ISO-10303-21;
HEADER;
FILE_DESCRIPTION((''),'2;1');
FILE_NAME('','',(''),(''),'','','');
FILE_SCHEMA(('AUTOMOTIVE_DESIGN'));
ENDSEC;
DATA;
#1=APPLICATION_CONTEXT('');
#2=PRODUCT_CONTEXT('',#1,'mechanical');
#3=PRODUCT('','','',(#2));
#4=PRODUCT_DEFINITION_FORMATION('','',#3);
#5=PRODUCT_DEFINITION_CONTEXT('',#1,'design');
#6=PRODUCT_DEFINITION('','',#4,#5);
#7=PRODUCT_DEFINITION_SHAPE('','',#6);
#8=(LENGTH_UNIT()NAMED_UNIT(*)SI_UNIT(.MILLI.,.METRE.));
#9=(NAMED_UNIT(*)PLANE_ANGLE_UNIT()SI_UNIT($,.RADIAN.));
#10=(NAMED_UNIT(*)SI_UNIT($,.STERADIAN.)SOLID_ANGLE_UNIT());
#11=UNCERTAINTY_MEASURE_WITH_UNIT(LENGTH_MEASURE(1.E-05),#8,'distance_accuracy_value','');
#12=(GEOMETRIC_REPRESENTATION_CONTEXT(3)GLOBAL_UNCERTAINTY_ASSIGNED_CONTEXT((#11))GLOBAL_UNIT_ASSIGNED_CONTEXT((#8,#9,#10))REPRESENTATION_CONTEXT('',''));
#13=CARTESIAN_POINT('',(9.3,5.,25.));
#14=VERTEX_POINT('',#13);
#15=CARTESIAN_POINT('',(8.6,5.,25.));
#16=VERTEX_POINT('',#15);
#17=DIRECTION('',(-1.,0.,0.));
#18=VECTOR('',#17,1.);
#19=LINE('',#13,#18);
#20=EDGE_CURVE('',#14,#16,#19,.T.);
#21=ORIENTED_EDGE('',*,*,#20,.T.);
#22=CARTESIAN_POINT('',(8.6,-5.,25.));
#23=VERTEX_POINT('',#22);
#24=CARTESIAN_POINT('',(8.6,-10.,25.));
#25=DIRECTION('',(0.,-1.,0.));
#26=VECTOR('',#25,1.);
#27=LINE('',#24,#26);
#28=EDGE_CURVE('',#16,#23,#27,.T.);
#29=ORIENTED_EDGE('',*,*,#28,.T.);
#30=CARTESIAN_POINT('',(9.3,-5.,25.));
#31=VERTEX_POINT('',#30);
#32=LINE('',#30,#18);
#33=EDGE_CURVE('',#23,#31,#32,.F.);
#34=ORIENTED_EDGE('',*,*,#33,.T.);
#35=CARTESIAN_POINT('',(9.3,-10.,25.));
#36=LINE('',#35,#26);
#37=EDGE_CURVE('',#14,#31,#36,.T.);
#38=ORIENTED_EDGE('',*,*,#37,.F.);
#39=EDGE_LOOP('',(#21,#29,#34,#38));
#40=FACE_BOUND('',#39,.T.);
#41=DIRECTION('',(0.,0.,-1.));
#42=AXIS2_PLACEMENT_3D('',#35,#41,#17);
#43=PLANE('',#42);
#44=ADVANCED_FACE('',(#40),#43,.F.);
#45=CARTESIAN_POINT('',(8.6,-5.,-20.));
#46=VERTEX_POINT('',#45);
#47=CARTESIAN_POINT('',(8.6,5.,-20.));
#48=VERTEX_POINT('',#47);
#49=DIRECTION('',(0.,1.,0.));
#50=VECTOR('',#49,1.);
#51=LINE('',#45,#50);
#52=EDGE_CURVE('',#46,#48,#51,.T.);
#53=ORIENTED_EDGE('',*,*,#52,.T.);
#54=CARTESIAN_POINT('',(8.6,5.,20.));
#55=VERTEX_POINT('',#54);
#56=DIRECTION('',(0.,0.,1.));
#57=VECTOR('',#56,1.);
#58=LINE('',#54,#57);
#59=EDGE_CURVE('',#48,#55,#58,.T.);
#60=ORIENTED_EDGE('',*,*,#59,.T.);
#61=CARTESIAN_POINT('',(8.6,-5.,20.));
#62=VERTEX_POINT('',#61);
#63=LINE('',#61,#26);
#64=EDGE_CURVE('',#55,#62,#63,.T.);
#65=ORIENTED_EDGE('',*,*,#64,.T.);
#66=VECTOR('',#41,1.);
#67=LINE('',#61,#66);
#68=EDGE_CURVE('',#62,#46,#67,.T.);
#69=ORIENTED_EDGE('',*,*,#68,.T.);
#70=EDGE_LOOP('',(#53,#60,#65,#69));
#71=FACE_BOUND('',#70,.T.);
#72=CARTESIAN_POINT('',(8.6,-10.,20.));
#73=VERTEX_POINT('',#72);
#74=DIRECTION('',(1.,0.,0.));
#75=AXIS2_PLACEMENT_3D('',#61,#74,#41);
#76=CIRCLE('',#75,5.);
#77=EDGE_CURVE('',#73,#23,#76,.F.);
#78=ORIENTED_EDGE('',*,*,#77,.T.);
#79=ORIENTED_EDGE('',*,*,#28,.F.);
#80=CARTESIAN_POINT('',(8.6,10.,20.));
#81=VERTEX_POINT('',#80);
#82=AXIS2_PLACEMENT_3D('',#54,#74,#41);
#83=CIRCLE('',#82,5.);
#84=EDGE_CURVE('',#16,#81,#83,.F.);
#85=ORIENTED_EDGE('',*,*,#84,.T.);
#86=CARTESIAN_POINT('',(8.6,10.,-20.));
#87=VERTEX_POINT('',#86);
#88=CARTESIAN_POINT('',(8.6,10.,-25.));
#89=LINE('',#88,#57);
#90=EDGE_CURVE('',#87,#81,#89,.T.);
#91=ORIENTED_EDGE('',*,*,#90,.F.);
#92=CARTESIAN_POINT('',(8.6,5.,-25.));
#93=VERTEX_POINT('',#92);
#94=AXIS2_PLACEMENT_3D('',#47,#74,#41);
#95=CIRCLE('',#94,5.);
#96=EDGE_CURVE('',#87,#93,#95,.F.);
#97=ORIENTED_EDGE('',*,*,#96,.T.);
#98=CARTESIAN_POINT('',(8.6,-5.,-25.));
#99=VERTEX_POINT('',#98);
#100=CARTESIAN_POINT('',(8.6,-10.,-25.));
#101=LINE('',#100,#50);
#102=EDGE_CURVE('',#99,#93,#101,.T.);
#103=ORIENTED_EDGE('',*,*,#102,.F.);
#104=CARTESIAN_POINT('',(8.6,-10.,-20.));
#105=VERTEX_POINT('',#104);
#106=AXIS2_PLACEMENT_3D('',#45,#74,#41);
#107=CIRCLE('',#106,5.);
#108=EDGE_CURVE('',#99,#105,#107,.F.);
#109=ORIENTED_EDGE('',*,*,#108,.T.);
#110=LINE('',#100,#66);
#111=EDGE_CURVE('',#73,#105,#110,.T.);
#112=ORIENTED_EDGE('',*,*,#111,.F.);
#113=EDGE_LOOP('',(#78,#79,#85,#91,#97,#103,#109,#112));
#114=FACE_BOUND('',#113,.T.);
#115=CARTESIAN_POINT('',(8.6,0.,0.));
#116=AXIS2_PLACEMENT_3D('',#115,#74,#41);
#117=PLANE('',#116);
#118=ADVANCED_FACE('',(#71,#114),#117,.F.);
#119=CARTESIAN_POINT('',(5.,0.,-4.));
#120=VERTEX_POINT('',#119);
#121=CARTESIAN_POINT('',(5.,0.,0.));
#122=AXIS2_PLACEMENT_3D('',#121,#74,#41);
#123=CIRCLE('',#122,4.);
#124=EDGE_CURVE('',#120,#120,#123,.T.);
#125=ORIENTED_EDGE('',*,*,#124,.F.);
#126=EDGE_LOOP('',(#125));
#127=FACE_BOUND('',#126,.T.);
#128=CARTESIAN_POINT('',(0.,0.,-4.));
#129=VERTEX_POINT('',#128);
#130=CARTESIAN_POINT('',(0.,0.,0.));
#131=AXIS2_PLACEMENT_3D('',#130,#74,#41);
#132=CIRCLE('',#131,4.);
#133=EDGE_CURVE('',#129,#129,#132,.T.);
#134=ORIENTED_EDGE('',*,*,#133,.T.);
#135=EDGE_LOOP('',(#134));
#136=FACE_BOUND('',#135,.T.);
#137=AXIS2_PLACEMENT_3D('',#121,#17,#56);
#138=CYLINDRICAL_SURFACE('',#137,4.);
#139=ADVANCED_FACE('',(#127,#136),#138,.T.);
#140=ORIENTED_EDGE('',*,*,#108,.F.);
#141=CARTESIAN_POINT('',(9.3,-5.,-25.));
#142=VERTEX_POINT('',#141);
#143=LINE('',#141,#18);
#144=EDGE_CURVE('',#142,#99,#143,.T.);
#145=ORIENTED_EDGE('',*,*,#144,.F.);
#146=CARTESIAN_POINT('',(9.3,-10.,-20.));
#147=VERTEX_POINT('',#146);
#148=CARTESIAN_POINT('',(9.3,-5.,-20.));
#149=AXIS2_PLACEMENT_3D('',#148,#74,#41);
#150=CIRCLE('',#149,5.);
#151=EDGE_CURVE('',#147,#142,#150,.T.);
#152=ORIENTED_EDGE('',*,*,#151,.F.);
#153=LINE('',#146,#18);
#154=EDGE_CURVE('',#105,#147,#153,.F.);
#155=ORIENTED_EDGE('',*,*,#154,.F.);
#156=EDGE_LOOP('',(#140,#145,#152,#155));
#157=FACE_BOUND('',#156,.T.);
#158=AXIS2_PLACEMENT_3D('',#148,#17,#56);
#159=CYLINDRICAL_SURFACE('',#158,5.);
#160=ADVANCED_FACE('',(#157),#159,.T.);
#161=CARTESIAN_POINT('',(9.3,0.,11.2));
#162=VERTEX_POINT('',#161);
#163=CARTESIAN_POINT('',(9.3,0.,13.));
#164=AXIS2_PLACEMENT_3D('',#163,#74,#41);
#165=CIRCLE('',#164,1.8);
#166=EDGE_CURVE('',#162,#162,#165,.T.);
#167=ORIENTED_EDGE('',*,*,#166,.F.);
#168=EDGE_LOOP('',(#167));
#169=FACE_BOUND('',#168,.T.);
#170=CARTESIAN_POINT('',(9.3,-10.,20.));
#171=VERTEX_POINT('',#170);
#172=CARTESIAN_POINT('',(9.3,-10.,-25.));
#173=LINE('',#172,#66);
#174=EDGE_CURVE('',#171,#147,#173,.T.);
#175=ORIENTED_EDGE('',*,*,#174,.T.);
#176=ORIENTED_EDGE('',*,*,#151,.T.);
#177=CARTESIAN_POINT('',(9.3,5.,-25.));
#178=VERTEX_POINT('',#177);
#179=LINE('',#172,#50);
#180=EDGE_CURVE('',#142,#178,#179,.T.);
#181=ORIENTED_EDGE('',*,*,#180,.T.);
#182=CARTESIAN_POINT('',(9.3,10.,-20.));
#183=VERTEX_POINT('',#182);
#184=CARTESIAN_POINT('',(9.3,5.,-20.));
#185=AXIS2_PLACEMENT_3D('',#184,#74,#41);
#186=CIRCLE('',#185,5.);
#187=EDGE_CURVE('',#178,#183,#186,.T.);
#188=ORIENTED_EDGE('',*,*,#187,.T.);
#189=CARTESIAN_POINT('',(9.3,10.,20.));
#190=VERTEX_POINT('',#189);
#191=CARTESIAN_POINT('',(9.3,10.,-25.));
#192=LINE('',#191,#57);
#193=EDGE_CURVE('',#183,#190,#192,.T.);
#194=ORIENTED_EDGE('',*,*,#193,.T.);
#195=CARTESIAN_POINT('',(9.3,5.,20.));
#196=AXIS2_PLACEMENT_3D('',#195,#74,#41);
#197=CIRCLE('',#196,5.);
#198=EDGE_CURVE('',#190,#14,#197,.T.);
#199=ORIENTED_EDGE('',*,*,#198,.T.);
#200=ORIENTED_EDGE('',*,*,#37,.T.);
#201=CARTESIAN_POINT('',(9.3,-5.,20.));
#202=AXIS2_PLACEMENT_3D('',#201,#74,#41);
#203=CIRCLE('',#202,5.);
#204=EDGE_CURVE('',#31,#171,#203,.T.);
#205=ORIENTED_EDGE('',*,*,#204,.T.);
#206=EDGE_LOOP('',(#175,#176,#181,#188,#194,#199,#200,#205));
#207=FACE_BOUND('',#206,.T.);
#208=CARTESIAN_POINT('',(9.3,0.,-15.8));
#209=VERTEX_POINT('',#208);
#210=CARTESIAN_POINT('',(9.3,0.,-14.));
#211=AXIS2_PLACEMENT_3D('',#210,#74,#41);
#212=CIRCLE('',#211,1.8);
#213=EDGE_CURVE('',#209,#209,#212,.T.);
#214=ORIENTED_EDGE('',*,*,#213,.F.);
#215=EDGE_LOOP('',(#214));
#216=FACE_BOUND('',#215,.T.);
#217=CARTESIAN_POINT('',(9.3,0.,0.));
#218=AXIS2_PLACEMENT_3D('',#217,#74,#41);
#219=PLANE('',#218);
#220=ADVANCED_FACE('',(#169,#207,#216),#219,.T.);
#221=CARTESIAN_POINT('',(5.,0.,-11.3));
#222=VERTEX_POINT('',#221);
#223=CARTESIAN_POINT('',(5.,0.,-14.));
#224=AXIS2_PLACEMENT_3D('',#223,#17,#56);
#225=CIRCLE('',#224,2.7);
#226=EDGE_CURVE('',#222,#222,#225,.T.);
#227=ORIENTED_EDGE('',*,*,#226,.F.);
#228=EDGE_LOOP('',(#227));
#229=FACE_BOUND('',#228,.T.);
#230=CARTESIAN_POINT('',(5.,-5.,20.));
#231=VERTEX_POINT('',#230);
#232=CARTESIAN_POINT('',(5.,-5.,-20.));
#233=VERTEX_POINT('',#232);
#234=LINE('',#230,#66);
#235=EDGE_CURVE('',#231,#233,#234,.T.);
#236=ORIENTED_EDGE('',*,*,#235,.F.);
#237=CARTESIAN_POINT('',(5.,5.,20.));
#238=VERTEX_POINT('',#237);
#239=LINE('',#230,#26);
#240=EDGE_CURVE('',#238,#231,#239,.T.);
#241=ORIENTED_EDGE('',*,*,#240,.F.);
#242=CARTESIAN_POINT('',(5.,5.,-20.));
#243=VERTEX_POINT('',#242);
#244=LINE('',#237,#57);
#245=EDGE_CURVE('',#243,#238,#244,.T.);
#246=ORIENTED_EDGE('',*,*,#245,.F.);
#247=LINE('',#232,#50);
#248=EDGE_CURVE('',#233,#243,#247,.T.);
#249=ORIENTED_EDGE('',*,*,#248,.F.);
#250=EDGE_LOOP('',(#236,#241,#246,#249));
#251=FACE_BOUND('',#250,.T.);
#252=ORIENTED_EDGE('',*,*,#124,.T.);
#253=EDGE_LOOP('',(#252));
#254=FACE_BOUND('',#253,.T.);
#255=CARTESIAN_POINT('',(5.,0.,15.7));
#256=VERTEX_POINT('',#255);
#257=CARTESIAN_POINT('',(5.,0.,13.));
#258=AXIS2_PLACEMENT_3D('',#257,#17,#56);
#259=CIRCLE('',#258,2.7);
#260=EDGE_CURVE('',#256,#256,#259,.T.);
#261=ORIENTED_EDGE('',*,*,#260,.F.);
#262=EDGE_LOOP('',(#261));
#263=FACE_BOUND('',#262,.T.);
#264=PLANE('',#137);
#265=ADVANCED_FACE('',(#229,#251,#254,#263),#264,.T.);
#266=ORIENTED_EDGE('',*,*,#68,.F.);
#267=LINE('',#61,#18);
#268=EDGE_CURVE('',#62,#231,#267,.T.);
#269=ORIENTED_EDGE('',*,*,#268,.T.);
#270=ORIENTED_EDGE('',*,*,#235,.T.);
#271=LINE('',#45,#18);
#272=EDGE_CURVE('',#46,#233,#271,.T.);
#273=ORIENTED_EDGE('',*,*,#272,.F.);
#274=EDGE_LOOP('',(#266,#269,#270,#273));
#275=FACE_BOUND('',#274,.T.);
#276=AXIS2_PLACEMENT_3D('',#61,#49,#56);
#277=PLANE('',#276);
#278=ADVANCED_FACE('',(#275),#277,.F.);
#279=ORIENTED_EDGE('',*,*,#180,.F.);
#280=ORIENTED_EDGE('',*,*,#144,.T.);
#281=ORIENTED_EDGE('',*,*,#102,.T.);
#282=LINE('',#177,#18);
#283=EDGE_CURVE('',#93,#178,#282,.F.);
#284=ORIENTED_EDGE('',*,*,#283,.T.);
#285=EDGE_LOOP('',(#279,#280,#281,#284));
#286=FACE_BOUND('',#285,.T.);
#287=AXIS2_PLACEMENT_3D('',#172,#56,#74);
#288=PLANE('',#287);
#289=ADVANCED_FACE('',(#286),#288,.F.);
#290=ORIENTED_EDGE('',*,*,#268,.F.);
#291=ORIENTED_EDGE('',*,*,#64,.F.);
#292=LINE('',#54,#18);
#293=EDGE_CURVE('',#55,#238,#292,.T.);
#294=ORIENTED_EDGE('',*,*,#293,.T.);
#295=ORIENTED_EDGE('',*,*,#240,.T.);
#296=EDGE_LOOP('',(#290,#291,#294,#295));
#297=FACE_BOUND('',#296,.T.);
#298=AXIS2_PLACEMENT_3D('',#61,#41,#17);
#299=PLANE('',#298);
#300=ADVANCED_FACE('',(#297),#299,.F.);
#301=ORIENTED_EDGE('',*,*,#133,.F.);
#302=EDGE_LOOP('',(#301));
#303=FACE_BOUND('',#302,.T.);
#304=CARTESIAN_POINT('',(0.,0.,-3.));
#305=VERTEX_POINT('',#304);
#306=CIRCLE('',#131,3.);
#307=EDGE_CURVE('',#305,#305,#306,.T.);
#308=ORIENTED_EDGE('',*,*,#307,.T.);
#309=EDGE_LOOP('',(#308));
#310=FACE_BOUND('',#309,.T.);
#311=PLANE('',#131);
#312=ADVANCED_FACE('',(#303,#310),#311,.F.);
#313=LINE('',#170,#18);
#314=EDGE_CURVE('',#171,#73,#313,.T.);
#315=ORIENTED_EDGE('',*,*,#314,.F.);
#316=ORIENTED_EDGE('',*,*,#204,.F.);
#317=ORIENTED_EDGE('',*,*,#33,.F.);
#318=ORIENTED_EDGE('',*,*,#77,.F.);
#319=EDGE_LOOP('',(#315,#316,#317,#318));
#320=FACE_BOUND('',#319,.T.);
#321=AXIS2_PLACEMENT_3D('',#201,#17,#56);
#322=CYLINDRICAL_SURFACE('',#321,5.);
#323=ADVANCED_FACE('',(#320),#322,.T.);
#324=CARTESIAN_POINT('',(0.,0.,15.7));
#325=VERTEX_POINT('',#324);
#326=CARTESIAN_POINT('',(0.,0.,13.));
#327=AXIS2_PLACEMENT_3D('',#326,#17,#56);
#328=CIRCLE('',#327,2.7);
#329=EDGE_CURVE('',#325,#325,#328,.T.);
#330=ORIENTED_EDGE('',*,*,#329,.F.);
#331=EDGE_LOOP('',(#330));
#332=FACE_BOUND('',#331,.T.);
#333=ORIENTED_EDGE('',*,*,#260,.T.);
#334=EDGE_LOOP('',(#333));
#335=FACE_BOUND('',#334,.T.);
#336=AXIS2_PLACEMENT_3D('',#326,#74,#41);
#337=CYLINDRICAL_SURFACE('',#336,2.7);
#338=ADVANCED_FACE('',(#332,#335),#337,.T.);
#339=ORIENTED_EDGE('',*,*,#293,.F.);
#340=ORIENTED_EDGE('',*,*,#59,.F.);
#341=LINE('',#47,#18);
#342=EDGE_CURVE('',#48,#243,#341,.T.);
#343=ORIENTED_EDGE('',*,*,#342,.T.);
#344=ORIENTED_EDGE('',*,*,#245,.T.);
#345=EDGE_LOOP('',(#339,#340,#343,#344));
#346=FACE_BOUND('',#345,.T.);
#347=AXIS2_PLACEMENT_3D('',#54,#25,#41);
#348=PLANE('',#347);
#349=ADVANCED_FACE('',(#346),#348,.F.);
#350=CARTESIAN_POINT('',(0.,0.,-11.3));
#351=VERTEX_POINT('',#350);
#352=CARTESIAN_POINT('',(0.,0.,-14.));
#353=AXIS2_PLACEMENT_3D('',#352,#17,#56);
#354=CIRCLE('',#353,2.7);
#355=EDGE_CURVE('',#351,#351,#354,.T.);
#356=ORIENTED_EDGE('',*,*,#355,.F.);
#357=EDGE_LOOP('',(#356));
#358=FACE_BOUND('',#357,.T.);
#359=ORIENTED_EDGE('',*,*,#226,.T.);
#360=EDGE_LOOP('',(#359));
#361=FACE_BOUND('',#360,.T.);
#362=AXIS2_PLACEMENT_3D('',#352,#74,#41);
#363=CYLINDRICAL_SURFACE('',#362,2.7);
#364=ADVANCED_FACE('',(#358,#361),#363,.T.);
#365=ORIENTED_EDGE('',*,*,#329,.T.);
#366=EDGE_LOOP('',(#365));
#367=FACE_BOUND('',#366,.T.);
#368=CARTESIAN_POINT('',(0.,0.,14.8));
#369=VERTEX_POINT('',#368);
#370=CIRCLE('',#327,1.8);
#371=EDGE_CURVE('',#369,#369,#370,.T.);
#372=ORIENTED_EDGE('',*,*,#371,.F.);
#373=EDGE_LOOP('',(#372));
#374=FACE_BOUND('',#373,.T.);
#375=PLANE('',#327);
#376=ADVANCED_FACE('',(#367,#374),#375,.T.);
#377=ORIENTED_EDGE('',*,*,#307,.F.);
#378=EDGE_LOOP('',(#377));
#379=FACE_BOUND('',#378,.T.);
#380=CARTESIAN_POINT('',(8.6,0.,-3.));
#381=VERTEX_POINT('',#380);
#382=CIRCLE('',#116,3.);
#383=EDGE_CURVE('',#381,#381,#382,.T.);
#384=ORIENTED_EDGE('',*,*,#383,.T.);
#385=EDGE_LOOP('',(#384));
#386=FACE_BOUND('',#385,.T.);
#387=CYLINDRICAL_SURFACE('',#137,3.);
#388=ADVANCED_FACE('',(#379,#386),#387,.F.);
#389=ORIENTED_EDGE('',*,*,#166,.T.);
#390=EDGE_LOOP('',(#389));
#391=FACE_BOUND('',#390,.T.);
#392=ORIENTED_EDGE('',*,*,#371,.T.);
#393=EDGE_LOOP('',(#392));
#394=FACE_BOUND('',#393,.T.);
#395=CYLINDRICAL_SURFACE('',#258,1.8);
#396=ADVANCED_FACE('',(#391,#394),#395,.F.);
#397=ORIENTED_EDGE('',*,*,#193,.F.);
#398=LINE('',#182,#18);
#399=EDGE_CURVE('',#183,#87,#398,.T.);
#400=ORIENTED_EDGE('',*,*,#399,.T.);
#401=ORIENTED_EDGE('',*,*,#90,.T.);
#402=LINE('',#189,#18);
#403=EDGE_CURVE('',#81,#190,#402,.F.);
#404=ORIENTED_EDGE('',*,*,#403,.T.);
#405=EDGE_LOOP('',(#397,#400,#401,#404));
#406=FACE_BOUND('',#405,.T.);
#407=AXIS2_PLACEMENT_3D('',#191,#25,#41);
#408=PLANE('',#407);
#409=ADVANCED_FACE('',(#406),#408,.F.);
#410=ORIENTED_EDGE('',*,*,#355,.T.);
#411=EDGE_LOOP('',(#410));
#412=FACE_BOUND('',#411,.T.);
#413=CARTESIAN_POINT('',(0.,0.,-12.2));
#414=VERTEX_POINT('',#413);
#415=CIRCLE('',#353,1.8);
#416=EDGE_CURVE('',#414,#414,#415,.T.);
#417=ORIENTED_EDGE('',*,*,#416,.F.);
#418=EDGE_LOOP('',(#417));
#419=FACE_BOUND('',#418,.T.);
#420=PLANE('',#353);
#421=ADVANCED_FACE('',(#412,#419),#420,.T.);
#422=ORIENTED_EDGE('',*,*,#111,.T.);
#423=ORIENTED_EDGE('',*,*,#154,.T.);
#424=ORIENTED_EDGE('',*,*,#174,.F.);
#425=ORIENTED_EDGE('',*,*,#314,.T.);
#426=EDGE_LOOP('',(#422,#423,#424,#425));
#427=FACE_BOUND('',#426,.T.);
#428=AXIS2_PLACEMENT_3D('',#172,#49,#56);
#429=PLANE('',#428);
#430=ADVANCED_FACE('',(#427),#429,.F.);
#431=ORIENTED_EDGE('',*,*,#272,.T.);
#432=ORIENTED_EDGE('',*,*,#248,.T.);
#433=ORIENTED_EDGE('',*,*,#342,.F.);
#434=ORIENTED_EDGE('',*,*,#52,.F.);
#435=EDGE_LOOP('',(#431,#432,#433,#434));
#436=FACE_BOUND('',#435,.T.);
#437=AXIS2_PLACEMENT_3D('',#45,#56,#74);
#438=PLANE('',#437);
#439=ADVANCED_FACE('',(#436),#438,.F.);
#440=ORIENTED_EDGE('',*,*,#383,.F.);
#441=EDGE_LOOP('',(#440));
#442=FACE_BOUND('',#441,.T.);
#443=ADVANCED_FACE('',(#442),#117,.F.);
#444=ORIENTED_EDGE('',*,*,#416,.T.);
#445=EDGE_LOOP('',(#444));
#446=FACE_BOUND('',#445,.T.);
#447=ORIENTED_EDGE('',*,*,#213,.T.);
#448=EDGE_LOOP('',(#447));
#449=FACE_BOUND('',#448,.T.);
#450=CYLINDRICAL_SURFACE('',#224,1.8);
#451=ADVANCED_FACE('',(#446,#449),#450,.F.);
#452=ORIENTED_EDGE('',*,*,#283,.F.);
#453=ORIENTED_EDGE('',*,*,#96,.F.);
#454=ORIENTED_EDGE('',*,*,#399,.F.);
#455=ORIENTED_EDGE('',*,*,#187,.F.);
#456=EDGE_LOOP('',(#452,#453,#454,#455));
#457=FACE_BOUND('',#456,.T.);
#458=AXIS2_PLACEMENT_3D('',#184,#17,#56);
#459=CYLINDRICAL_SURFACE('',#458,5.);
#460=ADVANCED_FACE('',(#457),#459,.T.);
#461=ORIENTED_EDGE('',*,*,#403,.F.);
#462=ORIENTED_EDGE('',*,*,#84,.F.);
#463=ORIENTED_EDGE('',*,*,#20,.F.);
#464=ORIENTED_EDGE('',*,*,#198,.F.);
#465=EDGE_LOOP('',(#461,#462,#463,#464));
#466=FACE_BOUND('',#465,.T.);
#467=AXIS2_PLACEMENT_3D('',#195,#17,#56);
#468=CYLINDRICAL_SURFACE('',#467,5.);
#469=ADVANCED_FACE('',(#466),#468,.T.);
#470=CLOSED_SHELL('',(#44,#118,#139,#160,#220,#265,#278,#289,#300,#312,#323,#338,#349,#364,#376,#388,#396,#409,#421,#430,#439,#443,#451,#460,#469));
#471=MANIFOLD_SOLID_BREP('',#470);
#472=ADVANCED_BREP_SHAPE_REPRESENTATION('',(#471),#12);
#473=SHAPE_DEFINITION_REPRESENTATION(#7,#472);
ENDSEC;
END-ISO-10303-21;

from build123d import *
from build123d.topology import SkipClean

# Parameters (mm, degrees)
SKETCH1_R                = 4
SKETCH1_R_2              = 3
BOSS_EXTRUDE1_DEPTH      = 5
SKETCH2_W                = 40
SKETCH2_H                = 10
SKETCH2_R                = 3
BOSS_EXTRUDE2_DEPTH      = 3.6
SKETCH7_W                = 50
SKETCH7_H                = 20
BOSS_EXTRUDE3_DEPTH      = 0.7
M3_CLEARANCE_HOLE1_D     = 3.6
M3_CLEARANCE_HOLE1_DEPTH = 12
M3_CLEARANCE_HOLE1_TIP   = 1.081549114
SKETCH8_R                = 2.7
SKETCH8_R_2              = 1.8
BOSS_EXTRUDE4_DEPTH      = 5
FILLET2_R                = 5


with BuildPart() as part:
    # Sketch1 → Boss-Extrude1 (new body)
    with BuildSketch(Plane(origin=(0, 0, 0), x_dir=(0, 0, -1), z_dir=(1, 0, 0))):
        Circle(SKETCH1_R)
        Circle(SKETCH1_R_2, mode=Mode.SUBTRACT)
    extrude(amount=BOSS_EXTRUDE1_DEPTH)

    # Sketch2 → Boss-Extrude2 (add)
    with BuildSketch(Plane(origin=(5, 0, 0), x_dir=(0, 0, -1), z_dir=(1, 0, 0))):
        Rectangle(SKETCH2_W, SKETCH2_H)
        Circle(SKETCH2_R, mode=Mode.SUBTRACT)
    extrude(amount=BOSS_EXTRUDE2_DEPTH)

    # Sketch7 → Boss-Extrude3 (add)
    with BuildSketch(Plane(origin=(8.6, 0, 0), x_dir=(0, 0, -1), z_dir=(1, 0, 0))):
        Rectangle(SKETCH7_W, SKETCH7_H)
    extrude(amount=BOSS_EXTRUDE3_DEPTH)

    # M3 Clearance Hole1
    with Locations(Plane.ZY.offset(-5)):
        with Locations((-14, 0), (13, 0)):
            Hole(M3_CLEARANCE_HOLE1_D / 2, depth=M3_CLEARANCE_HOLE1_DEPTH)
            with Locations((0, 0, -(M3_CLEARANCE_HOLE1_DEPTH + M3_CLEARANCE_HOLE1_TIP / 2))):  # 118° drill point
                Cone(0, M3_CLEARANCE_HOLE1_D / 2, M3_CLEARANCE_HOLE1_TIP, mode=Mode.SUBTRACT)

    # Sketch8 → Boss-Extrude4 (add)
    # profile 1 of 2: a face of its own
    with SkipClean():  # the faces are left unmerged after this step: merging them gives an invalid solid
        with BuildSketch(Plane.ZY.offset(-5)):
            with Locations((-14, 0)):
                Circle(SKETCH8_R)
            with Locations((-14, 0)):
                Circle(SKETCH8_R_2, mode=Mode.SUBTRACT)
        # profile 2 of 2: a face of its own
        with BuildSketch(Plane.ZY.offset(-5)):
            with Locations((13, 0)):
                Circle(SKETCH8_R)
            with Locations((13, 0)):
                Circle(SKETCH8_R_2, mode=Mode.SUBTRACT)
        extrude(amount=BOSS_EXTRUDE4_DEPTH)
    add(part.part.scale(1), mode=Mode.REPLACE)  # the faces are merged on a copy

    # Fillet2
    fillet2_edges = [part.edges().sort_by_distance(p)[0] for p in [
        (8.95, 10, 25),
        (8.95, -10, 25),
        (8.95, -10, -25),
        (8.95, 10, -25),
    ]]
    fillet(fillet2_edges, radius=FILLET2_R)


solid = part.part
